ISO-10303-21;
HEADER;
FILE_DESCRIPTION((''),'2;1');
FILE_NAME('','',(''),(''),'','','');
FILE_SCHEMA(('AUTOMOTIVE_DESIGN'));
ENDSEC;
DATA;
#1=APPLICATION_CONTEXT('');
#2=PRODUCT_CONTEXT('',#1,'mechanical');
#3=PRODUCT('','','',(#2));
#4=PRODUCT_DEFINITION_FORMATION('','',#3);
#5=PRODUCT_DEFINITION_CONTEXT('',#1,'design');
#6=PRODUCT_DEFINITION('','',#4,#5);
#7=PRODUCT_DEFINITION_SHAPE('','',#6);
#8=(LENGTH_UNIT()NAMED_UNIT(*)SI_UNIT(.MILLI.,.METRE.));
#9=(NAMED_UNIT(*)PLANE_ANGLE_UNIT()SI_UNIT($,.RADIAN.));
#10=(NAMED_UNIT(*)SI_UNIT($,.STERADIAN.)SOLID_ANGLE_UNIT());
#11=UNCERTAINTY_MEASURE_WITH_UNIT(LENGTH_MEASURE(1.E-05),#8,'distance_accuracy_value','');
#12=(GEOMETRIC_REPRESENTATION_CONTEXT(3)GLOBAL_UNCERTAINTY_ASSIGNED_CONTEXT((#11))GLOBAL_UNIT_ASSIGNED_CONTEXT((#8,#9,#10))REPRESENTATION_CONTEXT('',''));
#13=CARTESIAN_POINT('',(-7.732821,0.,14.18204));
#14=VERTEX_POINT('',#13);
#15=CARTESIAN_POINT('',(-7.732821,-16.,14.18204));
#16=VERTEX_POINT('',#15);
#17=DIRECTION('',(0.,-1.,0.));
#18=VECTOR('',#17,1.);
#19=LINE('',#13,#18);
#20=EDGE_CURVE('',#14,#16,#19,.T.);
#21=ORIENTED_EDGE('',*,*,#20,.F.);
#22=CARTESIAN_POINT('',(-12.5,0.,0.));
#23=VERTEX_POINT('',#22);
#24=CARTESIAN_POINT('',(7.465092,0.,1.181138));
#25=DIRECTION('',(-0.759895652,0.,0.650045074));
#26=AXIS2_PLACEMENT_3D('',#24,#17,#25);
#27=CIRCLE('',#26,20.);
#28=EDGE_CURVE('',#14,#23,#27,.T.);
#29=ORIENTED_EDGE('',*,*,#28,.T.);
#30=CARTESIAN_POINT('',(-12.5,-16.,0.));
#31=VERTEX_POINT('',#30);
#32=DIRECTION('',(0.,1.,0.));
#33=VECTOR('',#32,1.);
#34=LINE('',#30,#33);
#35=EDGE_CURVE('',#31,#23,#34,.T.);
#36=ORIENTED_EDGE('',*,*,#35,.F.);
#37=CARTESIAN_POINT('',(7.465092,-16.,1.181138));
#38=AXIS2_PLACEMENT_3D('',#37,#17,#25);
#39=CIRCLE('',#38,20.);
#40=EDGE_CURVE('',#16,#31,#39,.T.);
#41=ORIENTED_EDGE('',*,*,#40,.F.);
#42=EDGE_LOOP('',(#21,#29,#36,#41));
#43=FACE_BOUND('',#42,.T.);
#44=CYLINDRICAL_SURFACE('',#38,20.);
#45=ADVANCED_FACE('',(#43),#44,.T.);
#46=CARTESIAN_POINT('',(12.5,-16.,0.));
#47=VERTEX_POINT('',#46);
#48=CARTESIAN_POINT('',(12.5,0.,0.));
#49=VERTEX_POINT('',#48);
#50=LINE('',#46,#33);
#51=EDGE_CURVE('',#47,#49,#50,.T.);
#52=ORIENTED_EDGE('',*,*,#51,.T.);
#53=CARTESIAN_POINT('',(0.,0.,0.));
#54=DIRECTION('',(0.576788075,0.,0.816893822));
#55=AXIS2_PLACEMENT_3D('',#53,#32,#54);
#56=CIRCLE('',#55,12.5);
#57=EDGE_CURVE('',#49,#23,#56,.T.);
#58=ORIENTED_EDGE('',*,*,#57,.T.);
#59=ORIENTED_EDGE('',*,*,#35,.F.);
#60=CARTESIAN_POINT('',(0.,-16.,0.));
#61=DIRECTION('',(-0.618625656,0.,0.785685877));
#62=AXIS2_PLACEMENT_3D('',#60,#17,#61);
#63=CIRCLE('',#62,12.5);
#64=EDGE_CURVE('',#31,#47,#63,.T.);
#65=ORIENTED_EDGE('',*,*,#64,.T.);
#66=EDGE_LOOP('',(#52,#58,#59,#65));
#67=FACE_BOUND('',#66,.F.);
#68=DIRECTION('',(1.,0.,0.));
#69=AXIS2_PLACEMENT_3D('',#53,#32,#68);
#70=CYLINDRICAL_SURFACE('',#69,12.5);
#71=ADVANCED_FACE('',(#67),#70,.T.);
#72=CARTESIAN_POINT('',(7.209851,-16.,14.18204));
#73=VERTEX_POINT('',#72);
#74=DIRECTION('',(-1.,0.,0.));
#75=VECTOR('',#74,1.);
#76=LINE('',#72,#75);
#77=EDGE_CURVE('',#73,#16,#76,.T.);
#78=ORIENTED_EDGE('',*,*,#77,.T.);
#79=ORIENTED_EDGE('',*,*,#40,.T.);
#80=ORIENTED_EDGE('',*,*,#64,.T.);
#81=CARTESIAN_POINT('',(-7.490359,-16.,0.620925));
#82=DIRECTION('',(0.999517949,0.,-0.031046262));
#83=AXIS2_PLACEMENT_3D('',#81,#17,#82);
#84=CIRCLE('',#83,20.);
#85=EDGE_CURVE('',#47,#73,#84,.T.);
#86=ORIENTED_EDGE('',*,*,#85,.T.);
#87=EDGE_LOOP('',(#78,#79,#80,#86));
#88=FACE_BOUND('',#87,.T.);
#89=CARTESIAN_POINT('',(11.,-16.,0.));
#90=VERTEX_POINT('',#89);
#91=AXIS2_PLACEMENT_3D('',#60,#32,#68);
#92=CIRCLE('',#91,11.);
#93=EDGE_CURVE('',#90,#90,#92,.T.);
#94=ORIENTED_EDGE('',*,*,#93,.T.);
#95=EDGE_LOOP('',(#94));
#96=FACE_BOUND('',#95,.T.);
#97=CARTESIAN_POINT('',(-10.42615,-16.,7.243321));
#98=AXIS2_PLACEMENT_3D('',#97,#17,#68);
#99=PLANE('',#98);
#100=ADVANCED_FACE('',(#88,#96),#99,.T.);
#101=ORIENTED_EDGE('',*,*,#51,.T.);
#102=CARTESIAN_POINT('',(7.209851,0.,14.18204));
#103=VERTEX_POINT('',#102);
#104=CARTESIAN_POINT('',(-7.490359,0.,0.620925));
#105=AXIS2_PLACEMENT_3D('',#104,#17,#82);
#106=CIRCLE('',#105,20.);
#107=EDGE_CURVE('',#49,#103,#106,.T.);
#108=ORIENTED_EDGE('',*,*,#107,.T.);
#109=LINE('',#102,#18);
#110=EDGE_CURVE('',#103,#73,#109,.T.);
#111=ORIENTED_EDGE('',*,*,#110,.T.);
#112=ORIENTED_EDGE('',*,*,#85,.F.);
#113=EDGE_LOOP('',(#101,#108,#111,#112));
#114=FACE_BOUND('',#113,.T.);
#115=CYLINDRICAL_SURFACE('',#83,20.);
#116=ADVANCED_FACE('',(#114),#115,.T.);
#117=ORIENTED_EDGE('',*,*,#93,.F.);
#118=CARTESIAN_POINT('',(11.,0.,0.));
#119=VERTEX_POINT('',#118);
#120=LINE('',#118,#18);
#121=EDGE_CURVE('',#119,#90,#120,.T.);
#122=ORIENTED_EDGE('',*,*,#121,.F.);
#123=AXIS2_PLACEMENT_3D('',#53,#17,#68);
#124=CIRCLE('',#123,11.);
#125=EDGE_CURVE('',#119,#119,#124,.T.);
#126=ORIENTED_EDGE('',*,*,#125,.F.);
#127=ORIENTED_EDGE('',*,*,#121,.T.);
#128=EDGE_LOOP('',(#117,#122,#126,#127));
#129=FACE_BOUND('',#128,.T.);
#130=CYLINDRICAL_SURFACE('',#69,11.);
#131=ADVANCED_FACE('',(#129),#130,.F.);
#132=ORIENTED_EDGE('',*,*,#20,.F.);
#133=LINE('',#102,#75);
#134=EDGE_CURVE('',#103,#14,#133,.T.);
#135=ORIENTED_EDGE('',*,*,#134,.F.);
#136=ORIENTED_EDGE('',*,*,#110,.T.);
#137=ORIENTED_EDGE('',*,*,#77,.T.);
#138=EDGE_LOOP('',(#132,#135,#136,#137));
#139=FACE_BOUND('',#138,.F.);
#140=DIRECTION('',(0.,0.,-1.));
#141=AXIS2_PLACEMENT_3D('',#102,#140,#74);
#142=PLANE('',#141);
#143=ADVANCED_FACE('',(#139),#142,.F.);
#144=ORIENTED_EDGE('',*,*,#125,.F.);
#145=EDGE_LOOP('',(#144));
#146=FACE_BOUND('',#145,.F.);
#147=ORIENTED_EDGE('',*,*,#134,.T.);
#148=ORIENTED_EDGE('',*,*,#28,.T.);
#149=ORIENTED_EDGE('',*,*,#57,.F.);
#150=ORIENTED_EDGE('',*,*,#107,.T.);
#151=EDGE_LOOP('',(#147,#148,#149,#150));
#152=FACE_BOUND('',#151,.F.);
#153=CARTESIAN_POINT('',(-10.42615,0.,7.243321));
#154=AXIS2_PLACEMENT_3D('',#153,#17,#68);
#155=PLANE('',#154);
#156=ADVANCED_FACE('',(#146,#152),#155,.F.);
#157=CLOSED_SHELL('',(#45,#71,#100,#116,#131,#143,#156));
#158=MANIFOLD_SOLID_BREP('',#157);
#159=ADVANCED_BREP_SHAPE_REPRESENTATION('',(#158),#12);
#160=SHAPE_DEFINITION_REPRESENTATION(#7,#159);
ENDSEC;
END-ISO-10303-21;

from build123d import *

# Parameters (mm, degrees)
F0_R     = 12.5
F0_R_2   = 11
F1_DEPTH = 16
F3_DEPTH = 16
F4_DEPTH = 26
F6_DEPTH = 16


# Not quite as in the source:
# - a feature of the source that left no trace in its solid (it failed there, or was rolled back) is left out
# - a feature names something its author has since deleted; it is built from what else it names


with BuildPart() as f1:
    # F0 (on Front) → F1 (new body)
    with BuildSketch(Plane.XZ):
        Circle(F0_R)
        Circle(F0_R_2, mode=Mode.SUBTRACT)
    extrude(amount=F1_DEPTH)

    # F2 (on Front) → F3 (join)
    with BuildSketch(Plane.XZ):
        with BuildLine():
            Line((7.2098509409, 14.1820398122), (-7.7328206971, 14.1820398122))
            Line((-7.7328206971, 14.1820398122), (-7.7328206971, 9.7571304068))
            ThreePointArc((-7.7328206971, 9.7571304068), (0.3692249529, -12.210413225), (7.2098509409, 10.1820398122))
            Line((7.2098509409, 10.1820398122), (7.2098509409, 14.1820398122))
        make_face()
    extrude(amount=F3_DEPTH)

    # F0 (on Front) → F4 (cut)
    with BuildSketch(Plane.XZ):
        Circle(F0_R_2)
    extrude(amount=F4_DEPTH, mode=Mode.SUBTRACT)

    # F5 (on face) → F6 (join)
    with BuildSketch(Plane.XZ.offset(16)):
        with BuildLine():
            ThreePointArc((-7.7328206971, 14.1820398122), (-11.492539371, 7.5535946754), (-12.5, 0))
            ThreePointArc((-12.5, 0), (-11.2452269589, 5.4584677926), (-7.7328206971, 9.8210734681))
            Line((-7.7328206971, 9.8210734681), (-7.7328206971, 14.1820398122))
        make_face()
        with BuildLine():
            ThreePointArc((7.2098509409, 10.2111727735), (11.0989444715, 5.7500810098), (12.5, 0))
            ThreePointArc((12.5, 0), (11.2484098162, 7.6108139553), (7.2098509409, 14.1820398122))
            Line((7.2098509409, 14.1820398122), (7.2098509409, 10.2111727735))
        make_face()
    extrude(amount=-F6_DEPTH)


solid = f1.part
